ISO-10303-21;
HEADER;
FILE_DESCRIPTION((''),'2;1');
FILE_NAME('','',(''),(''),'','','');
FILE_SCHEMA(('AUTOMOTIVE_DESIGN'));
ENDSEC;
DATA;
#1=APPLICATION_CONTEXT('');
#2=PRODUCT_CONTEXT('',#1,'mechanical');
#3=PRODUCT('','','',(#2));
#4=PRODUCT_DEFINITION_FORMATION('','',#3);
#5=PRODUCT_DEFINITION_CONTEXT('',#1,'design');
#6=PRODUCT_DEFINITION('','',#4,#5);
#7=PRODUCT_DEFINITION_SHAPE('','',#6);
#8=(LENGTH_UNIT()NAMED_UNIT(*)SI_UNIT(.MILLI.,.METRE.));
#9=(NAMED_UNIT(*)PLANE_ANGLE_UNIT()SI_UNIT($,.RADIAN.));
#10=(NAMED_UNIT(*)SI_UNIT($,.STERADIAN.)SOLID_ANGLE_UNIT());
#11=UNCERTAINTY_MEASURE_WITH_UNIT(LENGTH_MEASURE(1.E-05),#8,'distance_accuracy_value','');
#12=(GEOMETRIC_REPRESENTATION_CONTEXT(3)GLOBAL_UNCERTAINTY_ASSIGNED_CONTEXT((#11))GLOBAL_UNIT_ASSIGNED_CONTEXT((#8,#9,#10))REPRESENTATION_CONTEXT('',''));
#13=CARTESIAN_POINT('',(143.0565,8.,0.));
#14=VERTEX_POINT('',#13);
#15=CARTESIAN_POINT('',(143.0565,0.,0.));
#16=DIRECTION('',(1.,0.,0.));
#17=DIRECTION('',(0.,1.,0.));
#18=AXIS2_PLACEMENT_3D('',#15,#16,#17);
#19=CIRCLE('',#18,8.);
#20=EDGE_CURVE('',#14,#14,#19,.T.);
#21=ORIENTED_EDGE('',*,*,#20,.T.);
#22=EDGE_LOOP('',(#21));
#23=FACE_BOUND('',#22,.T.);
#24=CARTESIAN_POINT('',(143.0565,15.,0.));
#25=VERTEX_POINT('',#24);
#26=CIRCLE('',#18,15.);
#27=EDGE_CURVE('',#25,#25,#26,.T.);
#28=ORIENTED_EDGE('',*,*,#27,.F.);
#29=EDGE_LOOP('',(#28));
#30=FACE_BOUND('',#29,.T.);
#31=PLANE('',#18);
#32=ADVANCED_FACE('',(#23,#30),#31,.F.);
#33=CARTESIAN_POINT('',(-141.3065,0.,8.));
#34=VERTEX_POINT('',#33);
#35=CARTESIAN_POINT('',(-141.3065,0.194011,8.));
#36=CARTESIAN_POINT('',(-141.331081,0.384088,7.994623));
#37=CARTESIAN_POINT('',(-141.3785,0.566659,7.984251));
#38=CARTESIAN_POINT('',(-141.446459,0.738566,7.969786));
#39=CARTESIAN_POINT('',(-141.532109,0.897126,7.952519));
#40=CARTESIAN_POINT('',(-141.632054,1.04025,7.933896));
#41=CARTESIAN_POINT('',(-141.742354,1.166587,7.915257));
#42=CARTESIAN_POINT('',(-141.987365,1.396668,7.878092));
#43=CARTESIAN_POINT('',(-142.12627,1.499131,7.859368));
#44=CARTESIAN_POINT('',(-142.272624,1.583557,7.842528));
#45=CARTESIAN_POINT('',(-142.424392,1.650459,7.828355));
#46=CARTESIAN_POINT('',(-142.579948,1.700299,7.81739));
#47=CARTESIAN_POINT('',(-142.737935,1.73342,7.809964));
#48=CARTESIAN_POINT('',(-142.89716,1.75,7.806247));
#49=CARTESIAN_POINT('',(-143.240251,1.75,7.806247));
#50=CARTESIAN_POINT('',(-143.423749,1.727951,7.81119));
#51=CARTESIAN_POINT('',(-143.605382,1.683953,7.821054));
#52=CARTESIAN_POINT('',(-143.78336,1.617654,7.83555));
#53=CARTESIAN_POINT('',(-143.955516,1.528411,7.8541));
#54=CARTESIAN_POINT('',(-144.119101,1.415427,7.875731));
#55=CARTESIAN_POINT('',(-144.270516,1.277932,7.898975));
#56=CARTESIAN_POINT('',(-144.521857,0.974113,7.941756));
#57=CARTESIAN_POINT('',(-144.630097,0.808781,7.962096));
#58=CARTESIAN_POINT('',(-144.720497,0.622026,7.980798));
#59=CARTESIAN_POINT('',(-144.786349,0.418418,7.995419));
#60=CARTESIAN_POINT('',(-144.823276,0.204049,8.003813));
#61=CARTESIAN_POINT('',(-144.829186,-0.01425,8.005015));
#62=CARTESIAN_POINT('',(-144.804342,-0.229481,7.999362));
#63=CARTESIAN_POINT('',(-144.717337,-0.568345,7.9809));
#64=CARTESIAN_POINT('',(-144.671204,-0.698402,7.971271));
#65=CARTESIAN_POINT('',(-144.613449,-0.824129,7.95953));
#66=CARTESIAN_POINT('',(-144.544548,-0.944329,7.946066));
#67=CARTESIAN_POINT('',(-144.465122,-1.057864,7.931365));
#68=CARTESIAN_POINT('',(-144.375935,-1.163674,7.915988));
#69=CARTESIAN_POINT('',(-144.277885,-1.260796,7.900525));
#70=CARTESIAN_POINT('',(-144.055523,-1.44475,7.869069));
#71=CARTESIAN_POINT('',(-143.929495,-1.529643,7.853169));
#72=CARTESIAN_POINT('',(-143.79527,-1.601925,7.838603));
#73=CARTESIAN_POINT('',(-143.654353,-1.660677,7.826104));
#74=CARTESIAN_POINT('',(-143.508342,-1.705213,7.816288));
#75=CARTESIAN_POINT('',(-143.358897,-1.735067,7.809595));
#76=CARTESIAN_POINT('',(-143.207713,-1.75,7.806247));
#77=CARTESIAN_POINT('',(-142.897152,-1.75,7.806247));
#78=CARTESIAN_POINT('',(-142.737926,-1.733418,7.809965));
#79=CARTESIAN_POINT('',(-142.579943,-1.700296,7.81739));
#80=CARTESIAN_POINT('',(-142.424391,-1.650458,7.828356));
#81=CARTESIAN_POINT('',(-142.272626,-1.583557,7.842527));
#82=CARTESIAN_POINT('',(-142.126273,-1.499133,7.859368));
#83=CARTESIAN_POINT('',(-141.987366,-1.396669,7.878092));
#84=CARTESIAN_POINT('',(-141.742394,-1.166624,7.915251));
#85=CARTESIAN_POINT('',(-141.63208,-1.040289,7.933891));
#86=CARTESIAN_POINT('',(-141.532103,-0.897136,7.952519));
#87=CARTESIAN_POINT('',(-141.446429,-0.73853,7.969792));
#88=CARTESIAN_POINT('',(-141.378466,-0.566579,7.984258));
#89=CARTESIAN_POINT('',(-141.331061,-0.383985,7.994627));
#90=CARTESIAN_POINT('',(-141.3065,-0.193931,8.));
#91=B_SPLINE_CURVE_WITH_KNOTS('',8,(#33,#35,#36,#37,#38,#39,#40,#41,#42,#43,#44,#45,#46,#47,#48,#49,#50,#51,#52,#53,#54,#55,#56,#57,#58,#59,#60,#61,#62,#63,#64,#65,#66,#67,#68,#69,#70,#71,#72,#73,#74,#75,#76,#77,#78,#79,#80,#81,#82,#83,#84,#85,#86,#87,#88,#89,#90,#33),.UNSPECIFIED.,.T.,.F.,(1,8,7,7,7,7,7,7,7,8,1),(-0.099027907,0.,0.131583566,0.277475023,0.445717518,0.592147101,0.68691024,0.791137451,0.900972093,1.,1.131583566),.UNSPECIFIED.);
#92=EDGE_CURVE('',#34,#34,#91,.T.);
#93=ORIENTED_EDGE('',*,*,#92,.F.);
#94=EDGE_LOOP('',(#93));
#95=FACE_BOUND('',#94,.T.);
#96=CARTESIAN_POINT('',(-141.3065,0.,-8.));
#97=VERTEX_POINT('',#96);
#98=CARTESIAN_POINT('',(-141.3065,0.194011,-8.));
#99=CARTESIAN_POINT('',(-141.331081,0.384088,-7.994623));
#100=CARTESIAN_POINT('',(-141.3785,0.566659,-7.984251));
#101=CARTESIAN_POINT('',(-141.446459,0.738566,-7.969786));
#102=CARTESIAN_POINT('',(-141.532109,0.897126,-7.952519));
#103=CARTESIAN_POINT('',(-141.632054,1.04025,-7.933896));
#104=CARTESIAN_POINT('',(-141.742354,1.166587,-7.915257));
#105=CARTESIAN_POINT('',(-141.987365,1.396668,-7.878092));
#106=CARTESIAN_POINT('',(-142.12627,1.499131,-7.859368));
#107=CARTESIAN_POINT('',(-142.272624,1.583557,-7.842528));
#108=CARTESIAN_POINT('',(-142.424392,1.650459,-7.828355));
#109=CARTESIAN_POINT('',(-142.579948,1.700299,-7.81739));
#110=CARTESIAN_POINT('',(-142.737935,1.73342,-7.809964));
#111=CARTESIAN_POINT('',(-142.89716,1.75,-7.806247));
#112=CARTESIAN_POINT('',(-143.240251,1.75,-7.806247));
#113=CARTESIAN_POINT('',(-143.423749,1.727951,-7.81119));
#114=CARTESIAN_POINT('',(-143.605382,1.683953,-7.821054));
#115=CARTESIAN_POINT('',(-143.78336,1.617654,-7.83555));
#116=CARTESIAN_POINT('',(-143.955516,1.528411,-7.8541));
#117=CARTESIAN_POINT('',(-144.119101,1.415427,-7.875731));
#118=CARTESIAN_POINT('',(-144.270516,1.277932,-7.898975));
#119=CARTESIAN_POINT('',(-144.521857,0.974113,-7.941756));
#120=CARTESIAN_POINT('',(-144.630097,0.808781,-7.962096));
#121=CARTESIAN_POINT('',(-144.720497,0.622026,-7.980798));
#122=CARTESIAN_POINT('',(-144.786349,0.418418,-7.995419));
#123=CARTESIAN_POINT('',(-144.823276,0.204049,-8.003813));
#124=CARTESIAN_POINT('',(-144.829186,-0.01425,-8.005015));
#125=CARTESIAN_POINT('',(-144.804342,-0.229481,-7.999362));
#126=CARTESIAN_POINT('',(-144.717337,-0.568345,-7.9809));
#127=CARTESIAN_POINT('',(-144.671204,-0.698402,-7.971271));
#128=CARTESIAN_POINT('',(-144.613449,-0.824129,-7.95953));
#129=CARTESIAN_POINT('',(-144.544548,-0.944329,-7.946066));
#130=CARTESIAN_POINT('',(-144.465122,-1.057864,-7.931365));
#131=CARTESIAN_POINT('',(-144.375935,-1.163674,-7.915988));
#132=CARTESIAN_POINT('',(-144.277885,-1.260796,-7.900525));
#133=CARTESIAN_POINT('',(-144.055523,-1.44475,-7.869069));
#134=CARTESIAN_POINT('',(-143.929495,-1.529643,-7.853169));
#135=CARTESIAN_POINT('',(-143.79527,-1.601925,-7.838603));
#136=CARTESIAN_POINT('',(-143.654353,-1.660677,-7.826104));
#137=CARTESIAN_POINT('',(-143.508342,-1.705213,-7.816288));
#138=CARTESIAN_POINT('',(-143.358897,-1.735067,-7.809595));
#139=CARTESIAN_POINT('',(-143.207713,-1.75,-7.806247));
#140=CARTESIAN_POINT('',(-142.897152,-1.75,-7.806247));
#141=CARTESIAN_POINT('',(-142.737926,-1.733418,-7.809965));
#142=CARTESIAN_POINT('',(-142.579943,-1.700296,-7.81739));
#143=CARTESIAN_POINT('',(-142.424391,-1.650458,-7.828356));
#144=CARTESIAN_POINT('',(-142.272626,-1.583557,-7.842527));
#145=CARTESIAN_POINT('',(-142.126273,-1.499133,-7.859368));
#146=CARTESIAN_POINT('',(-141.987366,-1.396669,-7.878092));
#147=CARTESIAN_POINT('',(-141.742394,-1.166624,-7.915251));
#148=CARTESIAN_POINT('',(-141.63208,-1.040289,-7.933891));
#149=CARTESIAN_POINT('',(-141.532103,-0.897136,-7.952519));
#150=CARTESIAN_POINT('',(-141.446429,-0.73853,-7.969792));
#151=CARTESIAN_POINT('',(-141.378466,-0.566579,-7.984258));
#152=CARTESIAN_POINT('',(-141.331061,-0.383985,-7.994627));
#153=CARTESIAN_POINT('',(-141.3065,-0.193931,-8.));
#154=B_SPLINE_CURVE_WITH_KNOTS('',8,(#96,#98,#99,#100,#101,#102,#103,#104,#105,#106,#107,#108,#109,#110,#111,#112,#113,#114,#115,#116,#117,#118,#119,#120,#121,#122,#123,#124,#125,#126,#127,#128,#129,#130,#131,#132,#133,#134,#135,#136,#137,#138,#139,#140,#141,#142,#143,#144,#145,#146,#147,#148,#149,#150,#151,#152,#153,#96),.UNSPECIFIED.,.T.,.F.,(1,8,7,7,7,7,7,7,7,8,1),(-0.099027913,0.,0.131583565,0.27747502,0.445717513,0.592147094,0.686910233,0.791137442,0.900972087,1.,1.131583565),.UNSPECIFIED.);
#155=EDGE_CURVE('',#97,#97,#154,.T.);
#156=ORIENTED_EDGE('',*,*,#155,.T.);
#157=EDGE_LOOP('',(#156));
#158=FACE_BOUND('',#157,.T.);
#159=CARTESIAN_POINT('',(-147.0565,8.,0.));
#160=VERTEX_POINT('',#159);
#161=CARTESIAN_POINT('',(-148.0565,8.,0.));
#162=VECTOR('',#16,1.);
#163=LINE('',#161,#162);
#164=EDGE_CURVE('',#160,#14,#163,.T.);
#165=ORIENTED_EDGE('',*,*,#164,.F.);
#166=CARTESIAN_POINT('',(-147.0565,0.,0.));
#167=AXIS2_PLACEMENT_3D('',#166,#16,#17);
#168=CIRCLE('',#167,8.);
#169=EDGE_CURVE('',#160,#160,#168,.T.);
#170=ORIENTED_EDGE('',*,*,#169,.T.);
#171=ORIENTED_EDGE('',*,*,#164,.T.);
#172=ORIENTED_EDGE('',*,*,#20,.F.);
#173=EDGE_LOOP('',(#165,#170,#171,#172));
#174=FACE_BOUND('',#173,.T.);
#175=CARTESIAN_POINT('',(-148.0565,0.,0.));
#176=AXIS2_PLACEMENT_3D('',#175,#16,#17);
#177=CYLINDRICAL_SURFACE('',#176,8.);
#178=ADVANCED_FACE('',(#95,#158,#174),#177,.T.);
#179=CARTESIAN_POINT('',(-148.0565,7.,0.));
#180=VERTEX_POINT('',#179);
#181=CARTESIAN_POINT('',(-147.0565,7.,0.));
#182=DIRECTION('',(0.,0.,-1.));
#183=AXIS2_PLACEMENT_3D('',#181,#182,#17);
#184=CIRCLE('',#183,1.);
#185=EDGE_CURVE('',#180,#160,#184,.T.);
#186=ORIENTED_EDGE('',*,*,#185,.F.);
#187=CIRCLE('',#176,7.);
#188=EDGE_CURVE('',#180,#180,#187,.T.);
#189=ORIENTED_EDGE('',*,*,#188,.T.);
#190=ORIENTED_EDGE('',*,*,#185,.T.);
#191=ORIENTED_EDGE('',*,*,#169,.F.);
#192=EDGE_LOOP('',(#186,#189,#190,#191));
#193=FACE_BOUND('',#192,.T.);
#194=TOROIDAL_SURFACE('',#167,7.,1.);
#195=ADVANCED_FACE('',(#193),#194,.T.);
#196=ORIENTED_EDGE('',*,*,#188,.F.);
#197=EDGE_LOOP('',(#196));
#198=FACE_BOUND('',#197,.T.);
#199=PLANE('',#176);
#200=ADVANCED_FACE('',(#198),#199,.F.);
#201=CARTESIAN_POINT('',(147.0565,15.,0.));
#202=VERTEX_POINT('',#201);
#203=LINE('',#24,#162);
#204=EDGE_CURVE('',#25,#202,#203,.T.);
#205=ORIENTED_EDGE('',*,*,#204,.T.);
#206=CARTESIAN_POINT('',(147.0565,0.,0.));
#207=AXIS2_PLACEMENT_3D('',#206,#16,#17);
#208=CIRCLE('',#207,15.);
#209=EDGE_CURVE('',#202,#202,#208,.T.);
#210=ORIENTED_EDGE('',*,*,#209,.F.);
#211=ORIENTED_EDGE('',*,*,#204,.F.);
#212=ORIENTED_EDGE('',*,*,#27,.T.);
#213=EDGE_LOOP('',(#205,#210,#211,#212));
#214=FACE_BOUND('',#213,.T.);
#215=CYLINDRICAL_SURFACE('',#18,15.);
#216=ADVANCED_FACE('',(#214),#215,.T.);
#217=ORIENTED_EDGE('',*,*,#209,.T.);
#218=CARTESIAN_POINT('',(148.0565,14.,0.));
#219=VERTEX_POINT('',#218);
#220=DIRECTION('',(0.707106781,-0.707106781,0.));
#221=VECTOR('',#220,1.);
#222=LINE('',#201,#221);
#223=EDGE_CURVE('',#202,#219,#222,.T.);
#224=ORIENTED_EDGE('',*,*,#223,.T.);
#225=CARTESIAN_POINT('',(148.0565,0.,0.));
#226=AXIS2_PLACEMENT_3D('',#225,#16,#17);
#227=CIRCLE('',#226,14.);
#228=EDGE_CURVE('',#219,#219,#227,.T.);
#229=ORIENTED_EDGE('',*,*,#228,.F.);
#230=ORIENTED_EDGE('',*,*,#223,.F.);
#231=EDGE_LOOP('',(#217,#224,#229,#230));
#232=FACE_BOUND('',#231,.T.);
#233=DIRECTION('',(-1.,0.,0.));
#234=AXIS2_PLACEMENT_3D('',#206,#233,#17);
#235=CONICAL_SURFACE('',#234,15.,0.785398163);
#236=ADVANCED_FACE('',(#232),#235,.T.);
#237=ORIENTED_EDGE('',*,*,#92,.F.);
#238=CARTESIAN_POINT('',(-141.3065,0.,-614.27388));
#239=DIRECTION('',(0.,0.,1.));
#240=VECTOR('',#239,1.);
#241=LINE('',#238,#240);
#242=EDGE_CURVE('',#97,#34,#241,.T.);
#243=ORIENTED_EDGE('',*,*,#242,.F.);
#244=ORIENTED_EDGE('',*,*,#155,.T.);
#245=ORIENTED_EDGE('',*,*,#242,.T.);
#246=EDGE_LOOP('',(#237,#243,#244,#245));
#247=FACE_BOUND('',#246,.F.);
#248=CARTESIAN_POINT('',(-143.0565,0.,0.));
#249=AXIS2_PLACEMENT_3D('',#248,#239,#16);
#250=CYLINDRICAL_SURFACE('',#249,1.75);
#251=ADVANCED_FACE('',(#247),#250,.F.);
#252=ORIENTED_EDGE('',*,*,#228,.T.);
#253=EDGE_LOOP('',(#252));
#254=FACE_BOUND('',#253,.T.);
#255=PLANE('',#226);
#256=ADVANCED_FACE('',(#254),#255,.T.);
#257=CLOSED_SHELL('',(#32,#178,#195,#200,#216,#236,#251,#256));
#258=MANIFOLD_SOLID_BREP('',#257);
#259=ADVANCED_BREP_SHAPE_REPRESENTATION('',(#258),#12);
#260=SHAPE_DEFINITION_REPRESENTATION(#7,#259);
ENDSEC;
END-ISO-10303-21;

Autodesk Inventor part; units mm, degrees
ref_plane "YZ Plane" through (0, 0, 0) normal (1, 0, 0) x (0, 1, 0)
ref_plane "XZ Plane" through (0, 0, 0) normal (0, 1, 0) x (-1, 0, 0)
ref_plane "XY Plane" through (0, 0, 0) normal (0, 0, 1) x (1, 0, 0)
sketch "Sketch1" plane through (0, 0, 0) normal (0, 0, 1) x (1, 0, 0)
  line L0 (-148.0565, 0) -> (148.0565, 0)
  line L1 (-148.0565, 0) -> (-148.0565, 8)
  line L2 (-148.0565, 8) -> (143.0565, 8)
  line L3 (143.0565, 8) -> (143.0565, 15)
  line L4 (143.0565, 15) -> (148.0565, 15)
  line L5 (148.0565, 15) -> (148.0565, 0)
  circle A0 centre (-143.0565, 0) radius 1.75
  point P0 (0, 0)
  point P1 (0, 0)
  point P2 (143.0565, 8.25)
  dimension "d0" = 296.113
  dimension "d1" = 16
  dimension "d2" = 5
  dimension "d3" = 30
  dimension "d8" = 3.5
  dimension "d9" = 5
  dimension "d12" = 0.25
revolve "Revolution1" add sketch "Sketch1" angle 360 about axis through (-148.0565, 0, 0) along (1, 0, 0) picked at (-142.9862, 0.5791) contours A0 L0 L1 L2 L3 L4 L5 | L0 A0
fillet "Fillet1" radius 1 1 edges at (-148.0565, -8, 0)
chamfer "Chamfer1" distance 1 angle 45 3 edges at (148.0565, -15, 0) (-147.0565, -8, 0) (-148.0565, -7, 0)
extrude "Extrusion2" cut sketch "Sketch1" against normal through all both and the other way through all contours A0 L0 | L0 A0
properties part number "PWTR-0137" material "Stainless Steel"
